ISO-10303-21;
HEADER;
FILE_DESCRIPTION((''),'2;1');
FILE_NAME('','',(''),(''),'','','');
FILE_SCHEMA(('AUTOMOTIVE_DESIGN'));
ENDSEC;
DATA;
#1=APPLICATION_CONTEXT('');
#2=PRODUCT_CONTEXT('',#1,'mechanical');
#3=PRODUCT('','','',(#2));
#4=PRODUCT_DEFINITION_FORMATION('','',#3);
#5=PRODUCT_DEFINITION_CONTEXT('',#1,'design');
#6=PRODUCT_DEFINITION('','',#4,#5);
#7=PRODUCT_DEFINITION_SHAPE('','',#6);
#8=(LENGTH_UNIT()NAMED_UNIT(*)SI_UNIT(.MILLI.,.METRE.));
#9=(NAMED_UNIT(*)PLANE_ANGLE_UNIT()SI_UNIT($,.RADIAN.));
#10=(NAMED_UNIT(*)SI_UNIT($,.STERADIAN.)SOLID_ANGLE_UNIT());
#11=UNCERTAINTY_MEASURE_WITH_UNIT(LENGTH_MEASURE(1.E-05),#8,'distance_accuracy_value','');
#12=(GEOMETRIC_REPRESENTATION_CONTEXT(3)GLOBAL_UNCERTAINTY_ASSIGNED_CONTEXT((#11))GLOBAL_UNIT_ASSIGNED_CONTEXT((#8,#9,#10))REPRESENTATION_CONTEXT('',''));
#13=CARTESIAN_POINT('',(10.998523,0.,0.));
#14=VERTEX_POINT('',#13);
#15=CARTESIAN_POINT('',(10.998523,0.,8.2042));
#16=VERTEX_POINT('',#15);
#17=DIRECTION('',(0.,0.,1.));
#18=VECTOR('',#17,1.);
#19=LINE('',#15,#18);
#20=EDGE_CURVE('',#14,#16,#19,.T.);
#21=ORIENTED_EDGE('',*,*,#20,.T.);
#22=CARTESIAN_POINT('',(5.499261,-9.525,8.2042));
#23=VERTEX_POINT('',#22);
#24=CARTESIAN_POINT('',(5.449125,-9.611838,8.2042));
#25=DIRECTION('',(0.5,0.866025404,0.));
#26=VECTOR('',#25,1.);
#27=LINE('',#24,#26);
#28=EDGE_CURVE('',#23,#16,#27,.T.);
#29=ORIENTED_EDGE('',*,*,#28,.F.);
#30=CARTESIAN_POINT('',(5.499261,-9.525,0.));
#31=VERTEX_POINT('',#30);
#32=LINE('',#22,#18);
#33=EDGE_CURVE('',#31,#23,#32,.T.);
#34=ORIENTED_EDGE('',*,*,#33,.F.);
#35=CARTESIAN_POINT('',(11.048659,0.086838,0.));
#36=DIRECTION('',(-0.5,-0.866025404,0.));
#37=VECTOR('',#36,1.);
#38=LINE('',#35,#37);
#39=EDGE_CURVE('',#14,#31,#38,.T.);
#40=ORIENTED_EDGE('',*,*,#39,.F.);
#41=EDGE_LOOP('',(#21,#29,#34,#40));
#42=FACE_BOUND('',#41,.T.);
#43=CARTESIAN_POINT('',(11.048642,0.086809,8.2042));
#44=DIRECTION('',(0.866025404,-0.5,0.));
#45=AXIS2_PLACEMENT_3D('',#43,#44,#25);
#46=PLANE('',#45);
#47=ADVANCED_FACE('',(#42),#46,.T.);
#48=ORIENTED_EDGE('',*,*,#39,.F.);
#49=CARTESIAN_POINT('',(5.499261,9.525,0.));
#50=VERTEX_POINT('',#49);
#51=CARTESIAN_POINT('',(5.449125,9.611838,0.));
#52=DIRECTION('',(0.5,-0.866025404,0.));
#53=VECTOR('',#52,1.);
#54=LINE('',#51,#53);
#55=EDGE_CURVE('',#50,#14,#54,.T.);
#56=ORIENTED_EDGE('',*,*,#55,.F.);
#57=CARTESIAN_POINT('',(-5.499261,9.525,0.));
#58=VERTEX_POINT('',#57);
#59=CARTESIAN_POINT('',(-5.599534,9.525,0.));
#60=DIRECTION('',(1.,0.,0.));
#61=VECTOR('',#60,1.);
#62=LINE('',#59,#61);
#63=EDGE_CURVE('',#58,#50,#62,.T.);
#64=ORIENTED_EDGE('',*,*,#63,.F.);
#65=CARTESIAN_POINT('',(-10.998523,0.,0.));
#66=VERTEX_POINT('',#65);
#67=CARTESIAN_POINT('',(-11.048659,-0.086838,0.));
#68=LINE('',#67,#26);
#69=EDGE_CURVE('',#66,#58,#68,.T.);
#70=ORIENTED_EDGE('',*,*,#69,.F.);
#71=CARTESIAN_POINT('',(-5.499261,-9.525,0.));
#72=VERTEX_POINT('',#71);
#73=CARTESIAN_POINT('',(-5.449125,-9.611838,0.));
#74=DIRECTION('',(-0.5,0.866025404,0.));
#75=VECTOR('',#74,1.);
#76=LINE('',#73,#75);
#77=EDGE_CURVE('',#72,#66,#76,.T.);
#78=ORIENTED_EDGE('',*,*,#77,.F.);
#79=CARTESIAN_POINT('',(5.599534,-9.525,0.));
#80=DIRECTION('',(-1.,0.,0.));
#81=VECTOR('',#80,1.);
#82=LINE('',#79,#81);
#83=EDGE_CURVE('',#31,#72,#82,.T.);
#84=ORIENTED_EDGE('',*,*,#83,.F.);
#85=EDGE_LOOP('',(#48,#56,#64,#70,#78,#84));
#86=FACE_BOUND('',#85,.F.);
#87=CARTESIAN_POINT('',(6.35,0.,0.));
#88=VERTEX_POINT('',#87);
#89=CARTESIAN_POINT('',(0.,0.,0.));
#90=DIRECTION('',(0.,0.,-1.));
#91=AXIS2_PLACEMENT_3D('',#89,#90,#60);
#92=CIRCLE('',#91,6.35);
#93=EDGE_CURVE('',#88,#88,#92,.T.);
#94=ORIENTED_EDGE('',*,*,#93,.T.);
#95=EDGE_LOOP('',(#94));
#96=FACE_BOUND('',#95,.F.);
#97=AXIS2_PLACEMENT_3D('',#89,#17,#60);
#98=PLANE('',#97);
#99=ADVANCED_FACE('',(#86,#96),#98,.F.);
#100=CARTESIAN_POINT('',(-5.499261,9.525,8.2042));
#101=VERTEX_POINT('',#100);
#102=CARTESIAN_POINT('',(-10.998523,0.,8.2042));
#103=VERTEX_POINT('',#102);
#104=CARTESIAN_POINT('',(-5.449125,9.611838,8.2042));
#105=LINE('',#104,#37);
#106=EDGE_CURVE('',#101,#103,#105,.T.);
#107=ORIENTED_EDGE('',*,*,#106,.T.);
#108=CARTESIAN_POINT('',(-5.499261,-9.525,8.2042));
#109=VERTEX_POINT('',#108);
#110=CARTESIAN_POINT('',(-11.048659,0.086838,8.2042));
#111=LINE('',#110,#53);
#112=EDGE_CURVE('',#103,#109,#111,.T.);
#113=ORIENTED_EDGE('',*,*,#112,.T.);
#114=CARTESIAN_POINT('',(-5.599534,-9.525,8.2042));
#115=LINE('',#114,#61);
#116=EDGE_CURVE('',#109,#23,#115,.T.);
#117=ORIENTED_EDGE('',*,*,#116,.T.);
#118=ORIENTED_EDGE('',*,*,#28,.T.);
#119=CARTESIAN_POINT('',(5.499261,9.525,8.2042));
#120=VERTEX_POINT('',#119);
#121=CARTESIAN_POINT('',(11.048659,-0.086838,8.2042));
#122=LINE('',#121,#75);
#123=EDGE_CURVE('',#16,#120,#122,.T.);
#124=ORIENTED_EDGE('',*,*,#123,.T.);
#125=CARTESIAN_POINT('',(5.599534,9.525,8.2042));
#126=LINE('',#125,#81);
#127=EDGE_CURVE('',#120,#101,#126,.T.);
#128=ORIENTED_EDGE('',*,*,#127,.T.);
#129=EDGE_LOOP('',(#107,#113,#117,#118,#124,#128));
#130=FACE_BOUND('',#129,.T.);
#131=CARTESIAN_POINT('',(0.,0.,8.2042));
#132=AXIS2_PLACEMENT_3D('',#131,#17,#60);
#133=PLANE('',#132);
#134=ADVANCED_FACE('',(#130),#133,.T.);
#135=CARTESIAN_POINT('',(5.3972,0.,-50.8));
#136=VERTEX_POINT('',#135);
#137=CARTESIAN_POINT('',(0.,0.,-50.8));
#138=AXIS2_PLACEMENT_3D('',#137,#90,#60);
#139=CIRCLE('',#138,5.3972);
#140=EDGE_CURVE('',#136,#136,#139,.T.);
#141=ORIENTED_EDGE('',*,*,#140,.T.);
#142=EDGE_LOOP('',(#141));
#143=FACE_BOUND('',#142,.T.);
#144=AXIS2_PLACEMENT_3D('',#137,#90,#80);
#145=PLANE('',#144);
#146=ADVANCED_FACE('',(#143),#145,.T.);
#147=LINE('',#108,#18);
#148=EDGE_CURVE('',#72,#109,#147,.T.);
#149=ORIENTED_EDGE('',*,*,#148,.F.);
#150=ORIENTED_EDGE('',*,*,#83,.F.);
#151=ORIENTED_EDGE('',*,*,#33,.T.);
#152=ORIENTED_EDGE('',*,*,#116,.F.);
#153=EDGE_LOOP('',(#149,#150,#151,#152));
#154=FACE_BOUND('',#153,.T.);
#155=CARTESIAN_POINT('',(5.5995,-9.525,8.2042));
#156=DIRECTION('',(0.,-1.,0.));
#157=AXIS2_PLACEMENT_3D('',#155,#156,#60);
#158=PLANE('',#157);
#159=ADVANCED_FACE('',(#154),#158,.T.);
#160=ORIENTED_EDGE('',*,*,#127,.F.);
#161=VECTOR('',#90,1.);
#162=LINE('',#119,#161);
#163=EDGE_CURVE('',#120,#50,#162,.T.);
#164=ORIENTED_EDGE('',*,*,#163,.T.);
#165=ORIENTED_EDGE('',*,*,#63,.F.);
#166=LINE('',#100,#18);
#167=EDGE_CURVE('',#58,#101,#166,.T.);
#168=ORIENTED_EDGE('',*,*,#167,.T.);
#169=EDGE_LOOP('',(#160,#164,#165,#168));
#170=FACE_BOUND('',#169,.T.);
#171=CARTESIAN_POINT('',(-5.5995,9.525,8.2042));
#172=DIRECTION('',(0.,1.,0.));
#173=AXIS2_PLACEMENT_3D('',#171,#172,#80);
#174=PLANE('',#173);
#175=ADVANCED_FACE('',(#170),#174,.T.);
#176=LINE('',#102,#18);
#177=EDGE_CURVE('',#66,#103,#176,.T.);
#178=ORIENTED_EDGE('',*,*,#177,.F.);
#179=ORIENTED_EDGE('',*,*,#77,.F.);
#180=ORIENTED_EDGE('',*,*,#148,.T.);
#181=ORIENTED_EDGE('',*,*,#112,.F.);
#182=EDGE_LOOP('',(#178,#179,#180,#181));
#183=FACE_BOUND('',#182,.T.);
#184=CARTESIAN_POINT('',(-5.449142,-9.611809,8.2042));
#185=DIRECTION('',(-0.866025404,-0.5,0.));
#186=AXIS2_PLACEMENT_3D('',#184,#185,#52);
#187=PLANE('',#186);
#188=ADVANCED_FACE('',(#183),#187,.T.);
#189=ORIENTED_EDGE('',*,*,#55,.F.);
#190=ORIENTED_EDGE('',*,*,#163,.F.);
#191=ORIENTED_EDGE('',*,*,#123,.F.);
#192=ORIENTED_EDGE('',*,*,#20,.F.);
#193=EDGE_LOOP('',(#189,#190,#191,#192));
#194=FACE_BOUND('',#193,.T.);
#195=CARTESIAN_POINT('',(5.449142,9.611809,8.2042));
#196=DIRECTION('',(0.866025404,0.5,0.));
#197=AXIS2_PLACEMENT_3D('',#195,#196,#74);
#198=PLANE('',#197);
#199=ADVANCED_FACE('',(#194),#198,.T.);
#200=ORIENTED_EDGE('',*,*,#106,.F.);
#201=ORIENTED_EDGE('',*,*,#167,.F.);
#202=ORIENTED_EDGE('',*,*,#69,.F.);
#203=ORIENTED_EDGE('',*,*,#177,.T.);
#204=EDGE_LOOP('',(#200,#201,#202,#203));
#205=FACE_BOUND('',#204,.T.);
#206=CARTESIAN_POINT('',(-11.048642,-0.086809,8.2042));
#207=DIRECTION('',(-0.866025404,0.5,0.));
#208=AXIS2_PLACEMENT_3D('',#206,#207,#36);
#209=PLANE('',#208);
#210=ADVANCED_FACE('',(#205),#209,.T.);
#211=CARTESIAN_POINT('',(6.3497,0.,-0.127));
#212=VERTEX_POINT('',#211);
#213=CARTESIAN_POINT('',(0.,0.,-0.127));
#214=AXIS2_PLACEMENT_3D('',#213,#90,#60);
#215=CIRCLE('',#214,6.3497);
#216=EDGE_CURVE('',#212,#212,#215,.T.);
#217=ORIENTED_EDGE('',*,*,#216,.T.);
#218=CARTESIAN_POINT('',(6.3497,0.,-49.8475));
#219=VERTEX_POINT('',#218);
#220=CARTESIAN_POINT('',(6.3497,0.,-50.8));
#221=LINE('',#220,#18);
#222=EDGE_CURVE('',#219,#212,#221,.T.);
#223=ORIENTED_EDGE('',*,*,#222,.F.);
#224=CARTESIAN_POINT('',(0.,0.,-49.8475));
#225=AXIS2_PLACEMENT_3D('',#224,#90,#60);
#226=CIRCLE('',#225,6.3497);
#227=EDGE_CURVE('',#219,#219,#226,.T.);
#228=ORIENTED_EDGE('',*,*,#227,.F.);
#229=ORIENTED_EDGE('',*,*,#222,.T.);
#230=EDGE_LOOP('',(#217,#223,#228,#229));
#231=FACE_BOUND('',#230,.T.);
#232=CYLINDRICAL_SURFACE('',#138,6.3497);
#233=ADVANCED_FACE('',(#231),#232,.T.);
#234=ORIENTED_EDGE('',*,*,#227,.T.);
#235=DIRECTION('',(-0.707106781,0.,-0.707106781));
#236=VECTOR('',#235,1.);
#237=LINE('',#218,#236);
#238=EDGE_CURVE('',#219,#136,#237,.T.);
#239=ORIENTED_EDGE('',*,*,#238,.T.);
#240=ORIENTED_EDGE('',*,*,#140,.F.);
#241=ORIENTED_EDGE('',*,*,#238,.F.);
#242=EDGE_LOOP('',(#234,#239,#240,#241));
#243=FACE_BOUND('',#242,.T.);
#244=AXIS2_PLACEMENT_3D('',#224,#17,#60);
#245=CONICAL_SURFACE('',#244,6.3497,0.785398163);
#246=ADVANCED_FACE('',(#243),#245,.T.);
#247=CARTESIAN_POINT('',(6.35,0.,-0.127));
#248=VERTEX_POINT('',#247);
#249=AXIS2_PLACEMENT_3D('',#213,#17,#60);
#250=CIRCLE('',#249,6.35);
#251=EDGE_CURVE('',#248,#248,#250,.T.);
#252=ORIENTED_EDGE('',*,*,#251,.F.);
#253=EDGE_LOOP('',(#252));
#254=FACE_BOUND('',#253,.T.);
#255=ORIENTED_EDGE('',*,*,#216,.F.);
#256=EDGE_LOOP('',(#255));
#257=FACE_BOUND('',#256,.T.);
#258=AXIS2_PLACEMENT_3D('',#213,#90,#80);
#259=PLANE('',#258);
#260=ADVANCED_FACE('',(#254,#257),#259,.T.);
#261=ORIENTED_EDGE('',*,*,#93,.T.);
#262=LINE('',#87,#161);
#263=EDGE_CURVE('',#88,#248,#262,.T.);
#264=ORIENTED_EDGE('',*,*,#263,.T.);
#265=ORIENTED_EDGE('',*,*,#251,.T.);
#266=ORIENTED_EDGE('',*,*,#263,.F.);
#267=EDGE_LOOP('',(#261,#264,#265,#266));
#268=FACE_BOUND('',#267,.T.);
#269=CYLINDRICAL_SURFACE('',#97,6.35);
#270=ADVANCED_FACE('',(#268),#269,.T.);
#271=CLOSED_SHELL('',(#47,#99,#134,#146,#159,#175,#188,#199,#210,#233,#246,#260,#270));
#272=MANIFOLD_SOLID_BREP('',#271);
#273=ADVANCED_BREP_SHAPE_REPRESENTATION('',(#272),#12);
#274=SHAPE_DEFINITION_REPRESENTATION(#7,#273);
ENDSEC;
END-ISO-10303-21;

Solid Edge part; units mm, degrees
sketch "Sketch1" plane through (0, 0, 0) normal (0, 0, 1) x (1, 0, 0)
  circle A0 centre (0, 0) radius 11.049
  dimension "D1" = 22.098
extrude "Protrusion1" add sketch "Sketch1" along normal blind 8.2042
sketch "Sketch2" plane through (0, 0, 0) normal (0, 0, -1) x (1, 0, 0)
  circle A0 centre (0, 0) radius 6.35
extrude "Protrusion2" add sketch "Sketch2" along normal blind 50.8
sketch "Sketch3" plane through (0, 0, -50.8) normal (0, 0, -1) x (1, 0, 0)
  circle A0 centre (0, 0) radius 6.3497
extrude "Cutout1" cut sketch "Sketch3" against normal blind 50.673 flip side to cut
chamfer "Chamfer_1" distance 0.9525 angle 45 1 edges at (-6.3497, 0, -50.8)
sketch "Sketch4" plane through (0, 0, 8.2042) normal (0, 0, 1) x (1, 0, 0)
  line L0 (-5.5995, 9.525) -> (5.5995, 9.525)
  dimension "D1" = 19.05
extrude "Cutout2" cut sketch "Sketch4" against normal up to next material side at (0, 9.575, 8.2042)
pattern_circular "Pattern1" count 6 over 360 about axis through (0, 0, 8.2042) along (0, 0, 1) of "Cutout2"
properties part number "24106033"
